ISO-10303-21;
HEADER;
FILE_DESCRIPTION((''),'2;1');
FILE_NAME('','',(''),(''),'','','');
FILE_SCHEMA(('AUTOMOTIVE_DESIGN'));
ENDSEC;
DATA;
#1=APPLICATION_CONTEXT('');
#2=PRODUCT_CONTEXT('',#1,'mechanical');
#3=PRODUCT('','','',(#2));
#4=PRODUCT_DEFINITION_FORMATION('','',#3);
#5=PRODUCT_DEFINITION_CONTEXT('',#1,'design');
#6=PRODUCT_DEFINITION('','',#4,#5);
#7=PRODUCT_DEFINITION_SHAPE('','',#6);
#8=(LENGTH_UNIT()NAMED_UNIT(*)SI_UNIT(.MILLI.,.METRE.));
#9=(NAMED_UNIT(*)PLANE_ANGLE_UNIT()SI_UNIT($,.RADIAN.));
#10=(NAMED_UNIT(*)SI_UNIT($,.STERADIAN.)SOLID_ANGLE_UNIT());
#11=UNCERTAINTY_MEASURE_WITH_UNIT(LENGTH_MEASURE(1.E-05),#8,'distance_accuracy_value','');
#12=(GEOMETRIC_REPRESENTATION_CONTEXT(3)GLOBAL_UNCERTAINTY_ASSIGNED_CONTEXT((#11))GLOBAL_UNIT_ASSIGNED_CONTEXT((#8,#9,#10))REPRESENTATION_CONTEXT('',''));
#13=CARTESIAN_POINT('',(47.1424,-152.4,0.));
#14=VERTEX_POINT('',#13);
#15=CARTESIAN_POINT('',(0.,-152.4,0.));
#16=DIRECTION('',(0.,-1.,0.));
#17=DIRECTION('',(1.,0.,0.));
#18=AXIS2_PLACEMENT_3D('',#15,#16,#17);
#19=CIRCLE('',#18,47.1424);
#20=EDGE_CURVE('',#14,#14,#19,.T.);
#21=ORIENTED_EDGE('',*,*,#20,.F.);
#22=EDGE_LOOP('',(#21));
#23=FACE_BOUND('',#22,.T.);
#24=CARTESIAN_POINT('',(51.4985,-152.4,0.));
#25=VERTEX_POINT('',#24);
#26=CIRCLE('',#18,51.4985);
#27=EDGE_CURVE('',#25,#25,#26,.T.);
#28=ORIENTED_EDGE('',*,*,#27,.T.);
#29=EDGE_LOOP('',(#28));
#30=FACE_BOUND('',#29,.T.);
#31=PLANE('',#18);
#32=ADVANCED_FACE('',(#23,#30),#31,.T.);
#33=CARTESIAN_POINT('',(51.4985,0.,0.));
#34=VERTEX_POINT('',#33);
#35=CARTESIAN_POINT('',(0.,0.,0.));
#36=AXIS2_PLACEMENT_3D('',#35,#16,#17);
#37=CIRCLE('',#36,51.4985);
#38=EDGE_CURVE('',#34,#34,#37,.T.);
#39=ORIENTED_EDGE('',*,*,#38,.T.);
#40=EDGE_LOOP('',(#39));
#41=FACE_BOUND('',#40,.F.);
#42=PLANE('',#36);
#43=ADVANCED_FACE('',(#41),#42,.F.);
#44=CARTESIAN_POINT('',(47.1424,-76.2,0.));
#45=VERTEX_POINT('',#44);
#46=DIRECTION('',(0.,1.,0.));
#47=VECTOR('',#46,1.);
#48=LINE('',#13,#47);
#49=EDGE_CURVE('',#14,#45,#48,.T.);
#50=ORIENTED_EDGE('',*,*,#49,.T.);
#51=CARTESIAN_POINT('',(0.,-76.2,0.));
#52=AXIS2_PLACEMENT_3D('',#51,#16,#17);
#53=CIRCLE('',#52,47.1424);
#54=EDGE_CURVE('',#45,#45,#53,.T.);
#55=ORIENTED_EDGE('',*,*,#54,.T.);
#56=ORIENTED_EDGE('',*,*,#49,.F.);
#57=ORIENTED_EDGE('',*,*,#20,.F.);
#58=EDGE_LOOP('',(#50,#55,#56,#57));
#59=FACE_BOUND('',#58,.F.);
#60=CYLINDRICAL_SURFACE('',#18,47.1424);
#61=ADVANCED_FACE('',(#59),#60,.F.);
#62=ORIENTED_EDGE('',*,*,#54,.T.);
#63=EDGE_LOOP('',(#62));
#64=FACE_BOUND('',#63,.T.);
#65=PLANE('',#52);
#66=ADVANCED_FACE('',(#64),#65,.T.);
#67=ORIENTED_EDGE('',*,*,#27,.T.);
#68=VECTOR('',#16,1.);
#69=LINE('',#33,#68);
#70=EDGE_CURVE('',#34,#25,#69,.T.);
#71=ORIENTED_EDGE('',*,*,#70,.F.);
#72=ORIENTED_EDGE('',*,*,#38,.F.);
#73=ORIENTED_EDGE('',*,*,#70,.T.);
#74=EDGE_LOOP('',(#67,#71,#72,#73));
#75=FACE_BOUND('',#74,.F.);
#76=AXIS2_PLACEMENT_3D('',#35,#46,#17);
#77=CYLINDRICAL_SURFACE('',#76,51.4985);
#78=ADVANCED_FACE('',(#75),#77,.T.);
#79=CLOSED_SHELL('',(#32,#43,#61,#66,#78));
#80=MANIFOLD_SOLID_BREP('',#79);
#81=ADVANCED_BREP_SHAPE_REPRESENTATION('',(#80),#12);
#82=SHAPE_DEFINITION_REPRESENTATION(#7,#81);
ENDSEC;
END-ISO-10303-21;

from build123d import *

# Parameters (mm, degrees)
F0_R     = 51.4985
F1_DEPTH = 152.4
F2_R     = 47.1424
F3_DEPTH = 76.2


# Not quite as in the source:
# - a feature names something its author has since deleted; it is built from what else it names


with BuildPart() as f1:
    # F0 (on Front) → F1 (new body)
    with BuildSketch(Plane.XZ):
        Circle(F0_R)
    extrude(amount=F1_DEPTH)

    # F2 (on face) → F3 (cut)
    with BuildSketch(Plane.XZ.offset(152.4)):
        Circle(F2_R)
    extrude(amount=-F3_DEPTH, mode=Mode.SUBTRACT)


solid = f1.part
